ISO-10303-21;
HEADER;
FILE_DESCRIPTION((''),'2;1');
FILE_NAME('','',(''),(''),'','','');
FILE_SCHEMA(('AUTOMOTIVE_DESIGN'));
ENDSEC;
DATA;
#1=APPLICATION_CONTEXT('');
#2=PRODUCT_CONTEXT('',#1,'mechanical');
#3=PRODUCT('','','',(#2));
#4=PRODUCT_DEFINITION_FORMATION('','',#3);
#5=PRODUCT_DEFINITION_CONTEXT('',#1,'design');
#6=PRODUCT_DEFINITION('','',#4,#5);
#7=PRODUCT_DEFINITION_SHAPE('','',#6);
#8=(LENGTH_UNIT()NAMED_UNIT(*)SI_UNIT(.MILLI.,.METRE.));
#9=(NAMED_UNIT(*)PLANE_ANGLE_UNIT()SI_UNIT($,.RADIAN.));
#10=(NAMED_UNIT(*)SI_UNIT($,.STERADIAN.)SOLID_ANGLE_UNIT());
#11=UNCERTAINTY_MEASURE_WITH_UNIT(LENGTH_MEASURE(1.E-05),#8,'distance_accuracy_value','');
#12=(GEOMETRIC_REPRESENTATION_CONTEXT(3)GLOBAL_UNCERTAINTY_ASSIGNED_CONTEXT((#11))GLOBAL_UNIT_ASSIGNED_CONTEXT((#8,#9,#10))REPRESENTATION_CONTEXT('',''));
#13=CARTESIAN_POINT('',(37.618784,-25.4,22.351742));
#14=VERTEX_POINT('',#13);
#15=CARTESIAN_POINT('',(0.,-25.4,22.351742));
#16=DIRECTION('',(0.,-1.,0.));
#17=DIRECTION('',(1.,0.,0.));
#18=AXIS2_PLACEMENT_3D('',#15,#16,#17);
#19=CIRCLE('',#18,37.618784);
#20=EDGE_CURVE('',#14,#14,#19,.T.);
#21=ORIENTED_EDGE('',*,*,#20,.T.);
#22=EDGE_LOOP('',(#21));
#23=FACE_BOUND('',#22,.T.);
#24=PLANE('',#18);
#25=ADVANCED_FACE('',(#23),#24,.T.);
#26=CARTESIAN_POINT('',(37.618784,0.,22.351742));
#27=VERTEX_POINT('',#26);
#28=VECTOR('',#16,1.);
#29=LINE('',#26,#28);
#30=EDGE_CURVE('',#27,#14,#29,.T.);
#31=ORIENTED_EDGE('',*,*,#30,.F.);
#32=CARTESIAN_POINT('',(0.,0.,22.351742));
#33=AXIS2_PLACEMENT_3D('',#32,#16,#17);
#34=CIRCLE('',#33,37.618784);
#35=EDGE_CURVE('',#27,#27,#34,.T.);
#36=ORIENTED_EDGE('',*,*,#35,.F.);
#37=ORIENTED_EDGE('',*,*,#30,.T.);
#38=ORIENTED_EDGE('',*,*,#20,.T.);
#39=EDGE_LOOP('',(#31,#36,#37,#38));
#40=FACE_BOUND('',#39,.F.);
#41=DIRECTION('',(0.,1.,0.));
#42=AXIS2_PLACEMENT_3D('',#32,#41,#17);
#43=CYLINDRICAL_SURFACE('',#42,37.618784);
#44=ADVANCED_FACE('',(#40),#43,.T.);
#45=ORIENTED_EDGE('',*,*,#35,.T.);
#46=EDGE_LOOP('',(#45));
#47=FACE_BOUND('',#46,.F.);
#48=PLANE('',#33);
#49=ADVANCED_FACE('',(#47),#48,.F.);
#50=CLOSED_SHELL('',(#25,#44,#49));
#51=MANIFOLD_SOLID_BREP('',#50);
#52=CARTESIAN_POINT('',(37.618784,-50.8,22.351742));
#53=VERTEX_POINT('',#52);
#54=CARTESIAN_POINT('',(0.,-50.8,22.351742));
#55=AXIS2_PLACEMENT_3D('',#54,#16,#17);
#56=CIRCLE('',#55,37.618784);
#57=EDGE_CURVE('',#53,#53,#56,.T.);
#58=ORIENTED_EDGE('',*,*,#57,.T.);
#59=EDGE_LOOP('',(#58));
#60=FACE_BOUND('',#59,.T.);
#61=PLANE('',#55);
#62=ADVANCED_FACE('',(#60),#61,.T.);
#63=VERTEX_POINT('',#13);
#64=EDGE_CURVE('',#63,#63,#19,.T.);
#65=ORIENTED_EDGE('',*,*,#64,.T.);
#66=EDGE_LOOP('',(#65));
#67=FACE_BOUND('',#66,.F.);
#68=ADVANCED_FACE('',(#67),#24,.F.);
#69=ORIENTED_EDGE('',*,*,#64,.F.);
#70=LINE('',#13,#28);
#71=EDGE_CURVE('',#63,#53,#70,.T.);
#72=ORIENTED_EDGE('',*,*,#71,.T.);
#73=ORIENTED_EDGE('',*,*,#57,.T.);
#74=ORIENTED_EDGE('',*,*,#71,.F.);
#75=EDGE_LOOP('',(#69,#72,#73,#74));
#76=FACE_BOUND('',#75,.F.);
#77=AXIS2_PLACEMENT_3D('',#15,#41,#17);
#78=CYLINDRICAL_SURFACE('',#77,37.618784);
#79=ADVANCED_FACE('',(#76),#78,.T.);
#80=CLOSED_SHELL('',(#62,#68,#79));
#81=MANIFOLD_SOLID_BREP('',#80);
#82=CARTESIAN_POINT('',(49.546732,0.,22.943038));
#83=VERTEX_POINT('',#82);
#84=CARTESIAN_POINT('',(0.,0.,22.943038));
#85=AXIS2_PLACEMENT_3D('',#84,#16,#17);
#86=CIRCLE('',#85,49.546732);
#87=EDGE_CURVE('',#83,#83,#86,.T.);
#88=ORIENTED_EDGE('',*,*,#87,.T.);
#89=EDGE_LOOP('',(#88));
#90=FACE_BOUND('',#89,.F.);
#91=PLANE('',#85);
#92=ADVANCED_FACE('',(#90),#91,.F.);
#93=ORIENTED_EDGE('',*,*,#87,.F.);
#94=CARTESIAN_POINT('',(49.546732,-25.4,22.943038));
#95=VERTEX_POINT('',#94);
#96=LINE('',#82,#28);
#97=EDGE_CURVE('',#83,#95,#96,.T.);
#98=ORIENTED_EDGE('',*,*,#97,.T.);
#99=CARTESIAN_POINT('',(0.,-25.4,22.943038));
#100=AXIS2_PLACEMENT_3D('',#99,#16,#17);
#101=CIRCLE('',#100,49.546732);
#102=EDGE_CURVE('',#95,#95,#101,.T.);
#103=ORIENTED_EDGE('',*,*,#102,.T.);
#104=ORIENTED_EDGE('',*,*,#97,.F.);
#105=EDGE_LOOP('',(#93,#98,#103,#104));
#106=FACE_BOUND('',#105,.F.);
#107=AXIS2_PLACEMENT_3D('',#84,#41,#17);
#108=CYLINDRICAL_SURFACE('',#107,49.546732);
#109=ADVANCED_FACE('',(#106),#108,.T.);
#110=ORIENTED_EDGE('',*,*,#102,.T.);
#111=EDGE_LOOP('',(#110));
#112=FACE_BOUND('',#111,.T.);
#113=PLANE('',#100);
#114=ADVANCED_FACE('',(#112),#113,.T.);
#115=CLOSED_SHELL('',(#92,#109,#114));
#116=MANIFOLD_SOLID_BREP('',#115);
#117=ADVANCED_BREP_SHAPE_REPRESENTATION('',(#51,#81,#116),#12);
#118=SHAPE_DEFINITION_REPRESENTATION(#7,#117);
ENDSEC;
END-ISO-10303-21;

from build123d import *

# Parameters (mm, degrees)
F0_R     = 49.5467317532
F2_DEPTH = 25.4
F1_R     = 37.6187843243
F3_DEPTH = 25.4


with BuildPart() as f2:
    # F0 (on Front) → F2 (new body)
    with BuildSketch(Plane.XZ):
        with Locations((0, 22.9430384934)):
            Circle(F0_R)
    extrude(amount=F2_DEPTH)


with BuildPart() as f2b:
    # F1 (on face) → F2, piece 2 (new body)
    with BuildSketch(Plane.XZ):
        with Locations((0, 22.3517417908)):
            Circle(F1_R)
    extrude(amount=F2_DEPTH)


with BuildPart() as f3:
    # F3 (new): a face of the model
    f3_faces = [f2b.part.faces().sort_by_distance(p)[0] for p in [
        (0, -25.4, 22.3517417908),
    ]]
    extrude(f3_faces, amount=F3_DEPTH)


solid = Compound([f2.part, f2b.part, f3.part])
